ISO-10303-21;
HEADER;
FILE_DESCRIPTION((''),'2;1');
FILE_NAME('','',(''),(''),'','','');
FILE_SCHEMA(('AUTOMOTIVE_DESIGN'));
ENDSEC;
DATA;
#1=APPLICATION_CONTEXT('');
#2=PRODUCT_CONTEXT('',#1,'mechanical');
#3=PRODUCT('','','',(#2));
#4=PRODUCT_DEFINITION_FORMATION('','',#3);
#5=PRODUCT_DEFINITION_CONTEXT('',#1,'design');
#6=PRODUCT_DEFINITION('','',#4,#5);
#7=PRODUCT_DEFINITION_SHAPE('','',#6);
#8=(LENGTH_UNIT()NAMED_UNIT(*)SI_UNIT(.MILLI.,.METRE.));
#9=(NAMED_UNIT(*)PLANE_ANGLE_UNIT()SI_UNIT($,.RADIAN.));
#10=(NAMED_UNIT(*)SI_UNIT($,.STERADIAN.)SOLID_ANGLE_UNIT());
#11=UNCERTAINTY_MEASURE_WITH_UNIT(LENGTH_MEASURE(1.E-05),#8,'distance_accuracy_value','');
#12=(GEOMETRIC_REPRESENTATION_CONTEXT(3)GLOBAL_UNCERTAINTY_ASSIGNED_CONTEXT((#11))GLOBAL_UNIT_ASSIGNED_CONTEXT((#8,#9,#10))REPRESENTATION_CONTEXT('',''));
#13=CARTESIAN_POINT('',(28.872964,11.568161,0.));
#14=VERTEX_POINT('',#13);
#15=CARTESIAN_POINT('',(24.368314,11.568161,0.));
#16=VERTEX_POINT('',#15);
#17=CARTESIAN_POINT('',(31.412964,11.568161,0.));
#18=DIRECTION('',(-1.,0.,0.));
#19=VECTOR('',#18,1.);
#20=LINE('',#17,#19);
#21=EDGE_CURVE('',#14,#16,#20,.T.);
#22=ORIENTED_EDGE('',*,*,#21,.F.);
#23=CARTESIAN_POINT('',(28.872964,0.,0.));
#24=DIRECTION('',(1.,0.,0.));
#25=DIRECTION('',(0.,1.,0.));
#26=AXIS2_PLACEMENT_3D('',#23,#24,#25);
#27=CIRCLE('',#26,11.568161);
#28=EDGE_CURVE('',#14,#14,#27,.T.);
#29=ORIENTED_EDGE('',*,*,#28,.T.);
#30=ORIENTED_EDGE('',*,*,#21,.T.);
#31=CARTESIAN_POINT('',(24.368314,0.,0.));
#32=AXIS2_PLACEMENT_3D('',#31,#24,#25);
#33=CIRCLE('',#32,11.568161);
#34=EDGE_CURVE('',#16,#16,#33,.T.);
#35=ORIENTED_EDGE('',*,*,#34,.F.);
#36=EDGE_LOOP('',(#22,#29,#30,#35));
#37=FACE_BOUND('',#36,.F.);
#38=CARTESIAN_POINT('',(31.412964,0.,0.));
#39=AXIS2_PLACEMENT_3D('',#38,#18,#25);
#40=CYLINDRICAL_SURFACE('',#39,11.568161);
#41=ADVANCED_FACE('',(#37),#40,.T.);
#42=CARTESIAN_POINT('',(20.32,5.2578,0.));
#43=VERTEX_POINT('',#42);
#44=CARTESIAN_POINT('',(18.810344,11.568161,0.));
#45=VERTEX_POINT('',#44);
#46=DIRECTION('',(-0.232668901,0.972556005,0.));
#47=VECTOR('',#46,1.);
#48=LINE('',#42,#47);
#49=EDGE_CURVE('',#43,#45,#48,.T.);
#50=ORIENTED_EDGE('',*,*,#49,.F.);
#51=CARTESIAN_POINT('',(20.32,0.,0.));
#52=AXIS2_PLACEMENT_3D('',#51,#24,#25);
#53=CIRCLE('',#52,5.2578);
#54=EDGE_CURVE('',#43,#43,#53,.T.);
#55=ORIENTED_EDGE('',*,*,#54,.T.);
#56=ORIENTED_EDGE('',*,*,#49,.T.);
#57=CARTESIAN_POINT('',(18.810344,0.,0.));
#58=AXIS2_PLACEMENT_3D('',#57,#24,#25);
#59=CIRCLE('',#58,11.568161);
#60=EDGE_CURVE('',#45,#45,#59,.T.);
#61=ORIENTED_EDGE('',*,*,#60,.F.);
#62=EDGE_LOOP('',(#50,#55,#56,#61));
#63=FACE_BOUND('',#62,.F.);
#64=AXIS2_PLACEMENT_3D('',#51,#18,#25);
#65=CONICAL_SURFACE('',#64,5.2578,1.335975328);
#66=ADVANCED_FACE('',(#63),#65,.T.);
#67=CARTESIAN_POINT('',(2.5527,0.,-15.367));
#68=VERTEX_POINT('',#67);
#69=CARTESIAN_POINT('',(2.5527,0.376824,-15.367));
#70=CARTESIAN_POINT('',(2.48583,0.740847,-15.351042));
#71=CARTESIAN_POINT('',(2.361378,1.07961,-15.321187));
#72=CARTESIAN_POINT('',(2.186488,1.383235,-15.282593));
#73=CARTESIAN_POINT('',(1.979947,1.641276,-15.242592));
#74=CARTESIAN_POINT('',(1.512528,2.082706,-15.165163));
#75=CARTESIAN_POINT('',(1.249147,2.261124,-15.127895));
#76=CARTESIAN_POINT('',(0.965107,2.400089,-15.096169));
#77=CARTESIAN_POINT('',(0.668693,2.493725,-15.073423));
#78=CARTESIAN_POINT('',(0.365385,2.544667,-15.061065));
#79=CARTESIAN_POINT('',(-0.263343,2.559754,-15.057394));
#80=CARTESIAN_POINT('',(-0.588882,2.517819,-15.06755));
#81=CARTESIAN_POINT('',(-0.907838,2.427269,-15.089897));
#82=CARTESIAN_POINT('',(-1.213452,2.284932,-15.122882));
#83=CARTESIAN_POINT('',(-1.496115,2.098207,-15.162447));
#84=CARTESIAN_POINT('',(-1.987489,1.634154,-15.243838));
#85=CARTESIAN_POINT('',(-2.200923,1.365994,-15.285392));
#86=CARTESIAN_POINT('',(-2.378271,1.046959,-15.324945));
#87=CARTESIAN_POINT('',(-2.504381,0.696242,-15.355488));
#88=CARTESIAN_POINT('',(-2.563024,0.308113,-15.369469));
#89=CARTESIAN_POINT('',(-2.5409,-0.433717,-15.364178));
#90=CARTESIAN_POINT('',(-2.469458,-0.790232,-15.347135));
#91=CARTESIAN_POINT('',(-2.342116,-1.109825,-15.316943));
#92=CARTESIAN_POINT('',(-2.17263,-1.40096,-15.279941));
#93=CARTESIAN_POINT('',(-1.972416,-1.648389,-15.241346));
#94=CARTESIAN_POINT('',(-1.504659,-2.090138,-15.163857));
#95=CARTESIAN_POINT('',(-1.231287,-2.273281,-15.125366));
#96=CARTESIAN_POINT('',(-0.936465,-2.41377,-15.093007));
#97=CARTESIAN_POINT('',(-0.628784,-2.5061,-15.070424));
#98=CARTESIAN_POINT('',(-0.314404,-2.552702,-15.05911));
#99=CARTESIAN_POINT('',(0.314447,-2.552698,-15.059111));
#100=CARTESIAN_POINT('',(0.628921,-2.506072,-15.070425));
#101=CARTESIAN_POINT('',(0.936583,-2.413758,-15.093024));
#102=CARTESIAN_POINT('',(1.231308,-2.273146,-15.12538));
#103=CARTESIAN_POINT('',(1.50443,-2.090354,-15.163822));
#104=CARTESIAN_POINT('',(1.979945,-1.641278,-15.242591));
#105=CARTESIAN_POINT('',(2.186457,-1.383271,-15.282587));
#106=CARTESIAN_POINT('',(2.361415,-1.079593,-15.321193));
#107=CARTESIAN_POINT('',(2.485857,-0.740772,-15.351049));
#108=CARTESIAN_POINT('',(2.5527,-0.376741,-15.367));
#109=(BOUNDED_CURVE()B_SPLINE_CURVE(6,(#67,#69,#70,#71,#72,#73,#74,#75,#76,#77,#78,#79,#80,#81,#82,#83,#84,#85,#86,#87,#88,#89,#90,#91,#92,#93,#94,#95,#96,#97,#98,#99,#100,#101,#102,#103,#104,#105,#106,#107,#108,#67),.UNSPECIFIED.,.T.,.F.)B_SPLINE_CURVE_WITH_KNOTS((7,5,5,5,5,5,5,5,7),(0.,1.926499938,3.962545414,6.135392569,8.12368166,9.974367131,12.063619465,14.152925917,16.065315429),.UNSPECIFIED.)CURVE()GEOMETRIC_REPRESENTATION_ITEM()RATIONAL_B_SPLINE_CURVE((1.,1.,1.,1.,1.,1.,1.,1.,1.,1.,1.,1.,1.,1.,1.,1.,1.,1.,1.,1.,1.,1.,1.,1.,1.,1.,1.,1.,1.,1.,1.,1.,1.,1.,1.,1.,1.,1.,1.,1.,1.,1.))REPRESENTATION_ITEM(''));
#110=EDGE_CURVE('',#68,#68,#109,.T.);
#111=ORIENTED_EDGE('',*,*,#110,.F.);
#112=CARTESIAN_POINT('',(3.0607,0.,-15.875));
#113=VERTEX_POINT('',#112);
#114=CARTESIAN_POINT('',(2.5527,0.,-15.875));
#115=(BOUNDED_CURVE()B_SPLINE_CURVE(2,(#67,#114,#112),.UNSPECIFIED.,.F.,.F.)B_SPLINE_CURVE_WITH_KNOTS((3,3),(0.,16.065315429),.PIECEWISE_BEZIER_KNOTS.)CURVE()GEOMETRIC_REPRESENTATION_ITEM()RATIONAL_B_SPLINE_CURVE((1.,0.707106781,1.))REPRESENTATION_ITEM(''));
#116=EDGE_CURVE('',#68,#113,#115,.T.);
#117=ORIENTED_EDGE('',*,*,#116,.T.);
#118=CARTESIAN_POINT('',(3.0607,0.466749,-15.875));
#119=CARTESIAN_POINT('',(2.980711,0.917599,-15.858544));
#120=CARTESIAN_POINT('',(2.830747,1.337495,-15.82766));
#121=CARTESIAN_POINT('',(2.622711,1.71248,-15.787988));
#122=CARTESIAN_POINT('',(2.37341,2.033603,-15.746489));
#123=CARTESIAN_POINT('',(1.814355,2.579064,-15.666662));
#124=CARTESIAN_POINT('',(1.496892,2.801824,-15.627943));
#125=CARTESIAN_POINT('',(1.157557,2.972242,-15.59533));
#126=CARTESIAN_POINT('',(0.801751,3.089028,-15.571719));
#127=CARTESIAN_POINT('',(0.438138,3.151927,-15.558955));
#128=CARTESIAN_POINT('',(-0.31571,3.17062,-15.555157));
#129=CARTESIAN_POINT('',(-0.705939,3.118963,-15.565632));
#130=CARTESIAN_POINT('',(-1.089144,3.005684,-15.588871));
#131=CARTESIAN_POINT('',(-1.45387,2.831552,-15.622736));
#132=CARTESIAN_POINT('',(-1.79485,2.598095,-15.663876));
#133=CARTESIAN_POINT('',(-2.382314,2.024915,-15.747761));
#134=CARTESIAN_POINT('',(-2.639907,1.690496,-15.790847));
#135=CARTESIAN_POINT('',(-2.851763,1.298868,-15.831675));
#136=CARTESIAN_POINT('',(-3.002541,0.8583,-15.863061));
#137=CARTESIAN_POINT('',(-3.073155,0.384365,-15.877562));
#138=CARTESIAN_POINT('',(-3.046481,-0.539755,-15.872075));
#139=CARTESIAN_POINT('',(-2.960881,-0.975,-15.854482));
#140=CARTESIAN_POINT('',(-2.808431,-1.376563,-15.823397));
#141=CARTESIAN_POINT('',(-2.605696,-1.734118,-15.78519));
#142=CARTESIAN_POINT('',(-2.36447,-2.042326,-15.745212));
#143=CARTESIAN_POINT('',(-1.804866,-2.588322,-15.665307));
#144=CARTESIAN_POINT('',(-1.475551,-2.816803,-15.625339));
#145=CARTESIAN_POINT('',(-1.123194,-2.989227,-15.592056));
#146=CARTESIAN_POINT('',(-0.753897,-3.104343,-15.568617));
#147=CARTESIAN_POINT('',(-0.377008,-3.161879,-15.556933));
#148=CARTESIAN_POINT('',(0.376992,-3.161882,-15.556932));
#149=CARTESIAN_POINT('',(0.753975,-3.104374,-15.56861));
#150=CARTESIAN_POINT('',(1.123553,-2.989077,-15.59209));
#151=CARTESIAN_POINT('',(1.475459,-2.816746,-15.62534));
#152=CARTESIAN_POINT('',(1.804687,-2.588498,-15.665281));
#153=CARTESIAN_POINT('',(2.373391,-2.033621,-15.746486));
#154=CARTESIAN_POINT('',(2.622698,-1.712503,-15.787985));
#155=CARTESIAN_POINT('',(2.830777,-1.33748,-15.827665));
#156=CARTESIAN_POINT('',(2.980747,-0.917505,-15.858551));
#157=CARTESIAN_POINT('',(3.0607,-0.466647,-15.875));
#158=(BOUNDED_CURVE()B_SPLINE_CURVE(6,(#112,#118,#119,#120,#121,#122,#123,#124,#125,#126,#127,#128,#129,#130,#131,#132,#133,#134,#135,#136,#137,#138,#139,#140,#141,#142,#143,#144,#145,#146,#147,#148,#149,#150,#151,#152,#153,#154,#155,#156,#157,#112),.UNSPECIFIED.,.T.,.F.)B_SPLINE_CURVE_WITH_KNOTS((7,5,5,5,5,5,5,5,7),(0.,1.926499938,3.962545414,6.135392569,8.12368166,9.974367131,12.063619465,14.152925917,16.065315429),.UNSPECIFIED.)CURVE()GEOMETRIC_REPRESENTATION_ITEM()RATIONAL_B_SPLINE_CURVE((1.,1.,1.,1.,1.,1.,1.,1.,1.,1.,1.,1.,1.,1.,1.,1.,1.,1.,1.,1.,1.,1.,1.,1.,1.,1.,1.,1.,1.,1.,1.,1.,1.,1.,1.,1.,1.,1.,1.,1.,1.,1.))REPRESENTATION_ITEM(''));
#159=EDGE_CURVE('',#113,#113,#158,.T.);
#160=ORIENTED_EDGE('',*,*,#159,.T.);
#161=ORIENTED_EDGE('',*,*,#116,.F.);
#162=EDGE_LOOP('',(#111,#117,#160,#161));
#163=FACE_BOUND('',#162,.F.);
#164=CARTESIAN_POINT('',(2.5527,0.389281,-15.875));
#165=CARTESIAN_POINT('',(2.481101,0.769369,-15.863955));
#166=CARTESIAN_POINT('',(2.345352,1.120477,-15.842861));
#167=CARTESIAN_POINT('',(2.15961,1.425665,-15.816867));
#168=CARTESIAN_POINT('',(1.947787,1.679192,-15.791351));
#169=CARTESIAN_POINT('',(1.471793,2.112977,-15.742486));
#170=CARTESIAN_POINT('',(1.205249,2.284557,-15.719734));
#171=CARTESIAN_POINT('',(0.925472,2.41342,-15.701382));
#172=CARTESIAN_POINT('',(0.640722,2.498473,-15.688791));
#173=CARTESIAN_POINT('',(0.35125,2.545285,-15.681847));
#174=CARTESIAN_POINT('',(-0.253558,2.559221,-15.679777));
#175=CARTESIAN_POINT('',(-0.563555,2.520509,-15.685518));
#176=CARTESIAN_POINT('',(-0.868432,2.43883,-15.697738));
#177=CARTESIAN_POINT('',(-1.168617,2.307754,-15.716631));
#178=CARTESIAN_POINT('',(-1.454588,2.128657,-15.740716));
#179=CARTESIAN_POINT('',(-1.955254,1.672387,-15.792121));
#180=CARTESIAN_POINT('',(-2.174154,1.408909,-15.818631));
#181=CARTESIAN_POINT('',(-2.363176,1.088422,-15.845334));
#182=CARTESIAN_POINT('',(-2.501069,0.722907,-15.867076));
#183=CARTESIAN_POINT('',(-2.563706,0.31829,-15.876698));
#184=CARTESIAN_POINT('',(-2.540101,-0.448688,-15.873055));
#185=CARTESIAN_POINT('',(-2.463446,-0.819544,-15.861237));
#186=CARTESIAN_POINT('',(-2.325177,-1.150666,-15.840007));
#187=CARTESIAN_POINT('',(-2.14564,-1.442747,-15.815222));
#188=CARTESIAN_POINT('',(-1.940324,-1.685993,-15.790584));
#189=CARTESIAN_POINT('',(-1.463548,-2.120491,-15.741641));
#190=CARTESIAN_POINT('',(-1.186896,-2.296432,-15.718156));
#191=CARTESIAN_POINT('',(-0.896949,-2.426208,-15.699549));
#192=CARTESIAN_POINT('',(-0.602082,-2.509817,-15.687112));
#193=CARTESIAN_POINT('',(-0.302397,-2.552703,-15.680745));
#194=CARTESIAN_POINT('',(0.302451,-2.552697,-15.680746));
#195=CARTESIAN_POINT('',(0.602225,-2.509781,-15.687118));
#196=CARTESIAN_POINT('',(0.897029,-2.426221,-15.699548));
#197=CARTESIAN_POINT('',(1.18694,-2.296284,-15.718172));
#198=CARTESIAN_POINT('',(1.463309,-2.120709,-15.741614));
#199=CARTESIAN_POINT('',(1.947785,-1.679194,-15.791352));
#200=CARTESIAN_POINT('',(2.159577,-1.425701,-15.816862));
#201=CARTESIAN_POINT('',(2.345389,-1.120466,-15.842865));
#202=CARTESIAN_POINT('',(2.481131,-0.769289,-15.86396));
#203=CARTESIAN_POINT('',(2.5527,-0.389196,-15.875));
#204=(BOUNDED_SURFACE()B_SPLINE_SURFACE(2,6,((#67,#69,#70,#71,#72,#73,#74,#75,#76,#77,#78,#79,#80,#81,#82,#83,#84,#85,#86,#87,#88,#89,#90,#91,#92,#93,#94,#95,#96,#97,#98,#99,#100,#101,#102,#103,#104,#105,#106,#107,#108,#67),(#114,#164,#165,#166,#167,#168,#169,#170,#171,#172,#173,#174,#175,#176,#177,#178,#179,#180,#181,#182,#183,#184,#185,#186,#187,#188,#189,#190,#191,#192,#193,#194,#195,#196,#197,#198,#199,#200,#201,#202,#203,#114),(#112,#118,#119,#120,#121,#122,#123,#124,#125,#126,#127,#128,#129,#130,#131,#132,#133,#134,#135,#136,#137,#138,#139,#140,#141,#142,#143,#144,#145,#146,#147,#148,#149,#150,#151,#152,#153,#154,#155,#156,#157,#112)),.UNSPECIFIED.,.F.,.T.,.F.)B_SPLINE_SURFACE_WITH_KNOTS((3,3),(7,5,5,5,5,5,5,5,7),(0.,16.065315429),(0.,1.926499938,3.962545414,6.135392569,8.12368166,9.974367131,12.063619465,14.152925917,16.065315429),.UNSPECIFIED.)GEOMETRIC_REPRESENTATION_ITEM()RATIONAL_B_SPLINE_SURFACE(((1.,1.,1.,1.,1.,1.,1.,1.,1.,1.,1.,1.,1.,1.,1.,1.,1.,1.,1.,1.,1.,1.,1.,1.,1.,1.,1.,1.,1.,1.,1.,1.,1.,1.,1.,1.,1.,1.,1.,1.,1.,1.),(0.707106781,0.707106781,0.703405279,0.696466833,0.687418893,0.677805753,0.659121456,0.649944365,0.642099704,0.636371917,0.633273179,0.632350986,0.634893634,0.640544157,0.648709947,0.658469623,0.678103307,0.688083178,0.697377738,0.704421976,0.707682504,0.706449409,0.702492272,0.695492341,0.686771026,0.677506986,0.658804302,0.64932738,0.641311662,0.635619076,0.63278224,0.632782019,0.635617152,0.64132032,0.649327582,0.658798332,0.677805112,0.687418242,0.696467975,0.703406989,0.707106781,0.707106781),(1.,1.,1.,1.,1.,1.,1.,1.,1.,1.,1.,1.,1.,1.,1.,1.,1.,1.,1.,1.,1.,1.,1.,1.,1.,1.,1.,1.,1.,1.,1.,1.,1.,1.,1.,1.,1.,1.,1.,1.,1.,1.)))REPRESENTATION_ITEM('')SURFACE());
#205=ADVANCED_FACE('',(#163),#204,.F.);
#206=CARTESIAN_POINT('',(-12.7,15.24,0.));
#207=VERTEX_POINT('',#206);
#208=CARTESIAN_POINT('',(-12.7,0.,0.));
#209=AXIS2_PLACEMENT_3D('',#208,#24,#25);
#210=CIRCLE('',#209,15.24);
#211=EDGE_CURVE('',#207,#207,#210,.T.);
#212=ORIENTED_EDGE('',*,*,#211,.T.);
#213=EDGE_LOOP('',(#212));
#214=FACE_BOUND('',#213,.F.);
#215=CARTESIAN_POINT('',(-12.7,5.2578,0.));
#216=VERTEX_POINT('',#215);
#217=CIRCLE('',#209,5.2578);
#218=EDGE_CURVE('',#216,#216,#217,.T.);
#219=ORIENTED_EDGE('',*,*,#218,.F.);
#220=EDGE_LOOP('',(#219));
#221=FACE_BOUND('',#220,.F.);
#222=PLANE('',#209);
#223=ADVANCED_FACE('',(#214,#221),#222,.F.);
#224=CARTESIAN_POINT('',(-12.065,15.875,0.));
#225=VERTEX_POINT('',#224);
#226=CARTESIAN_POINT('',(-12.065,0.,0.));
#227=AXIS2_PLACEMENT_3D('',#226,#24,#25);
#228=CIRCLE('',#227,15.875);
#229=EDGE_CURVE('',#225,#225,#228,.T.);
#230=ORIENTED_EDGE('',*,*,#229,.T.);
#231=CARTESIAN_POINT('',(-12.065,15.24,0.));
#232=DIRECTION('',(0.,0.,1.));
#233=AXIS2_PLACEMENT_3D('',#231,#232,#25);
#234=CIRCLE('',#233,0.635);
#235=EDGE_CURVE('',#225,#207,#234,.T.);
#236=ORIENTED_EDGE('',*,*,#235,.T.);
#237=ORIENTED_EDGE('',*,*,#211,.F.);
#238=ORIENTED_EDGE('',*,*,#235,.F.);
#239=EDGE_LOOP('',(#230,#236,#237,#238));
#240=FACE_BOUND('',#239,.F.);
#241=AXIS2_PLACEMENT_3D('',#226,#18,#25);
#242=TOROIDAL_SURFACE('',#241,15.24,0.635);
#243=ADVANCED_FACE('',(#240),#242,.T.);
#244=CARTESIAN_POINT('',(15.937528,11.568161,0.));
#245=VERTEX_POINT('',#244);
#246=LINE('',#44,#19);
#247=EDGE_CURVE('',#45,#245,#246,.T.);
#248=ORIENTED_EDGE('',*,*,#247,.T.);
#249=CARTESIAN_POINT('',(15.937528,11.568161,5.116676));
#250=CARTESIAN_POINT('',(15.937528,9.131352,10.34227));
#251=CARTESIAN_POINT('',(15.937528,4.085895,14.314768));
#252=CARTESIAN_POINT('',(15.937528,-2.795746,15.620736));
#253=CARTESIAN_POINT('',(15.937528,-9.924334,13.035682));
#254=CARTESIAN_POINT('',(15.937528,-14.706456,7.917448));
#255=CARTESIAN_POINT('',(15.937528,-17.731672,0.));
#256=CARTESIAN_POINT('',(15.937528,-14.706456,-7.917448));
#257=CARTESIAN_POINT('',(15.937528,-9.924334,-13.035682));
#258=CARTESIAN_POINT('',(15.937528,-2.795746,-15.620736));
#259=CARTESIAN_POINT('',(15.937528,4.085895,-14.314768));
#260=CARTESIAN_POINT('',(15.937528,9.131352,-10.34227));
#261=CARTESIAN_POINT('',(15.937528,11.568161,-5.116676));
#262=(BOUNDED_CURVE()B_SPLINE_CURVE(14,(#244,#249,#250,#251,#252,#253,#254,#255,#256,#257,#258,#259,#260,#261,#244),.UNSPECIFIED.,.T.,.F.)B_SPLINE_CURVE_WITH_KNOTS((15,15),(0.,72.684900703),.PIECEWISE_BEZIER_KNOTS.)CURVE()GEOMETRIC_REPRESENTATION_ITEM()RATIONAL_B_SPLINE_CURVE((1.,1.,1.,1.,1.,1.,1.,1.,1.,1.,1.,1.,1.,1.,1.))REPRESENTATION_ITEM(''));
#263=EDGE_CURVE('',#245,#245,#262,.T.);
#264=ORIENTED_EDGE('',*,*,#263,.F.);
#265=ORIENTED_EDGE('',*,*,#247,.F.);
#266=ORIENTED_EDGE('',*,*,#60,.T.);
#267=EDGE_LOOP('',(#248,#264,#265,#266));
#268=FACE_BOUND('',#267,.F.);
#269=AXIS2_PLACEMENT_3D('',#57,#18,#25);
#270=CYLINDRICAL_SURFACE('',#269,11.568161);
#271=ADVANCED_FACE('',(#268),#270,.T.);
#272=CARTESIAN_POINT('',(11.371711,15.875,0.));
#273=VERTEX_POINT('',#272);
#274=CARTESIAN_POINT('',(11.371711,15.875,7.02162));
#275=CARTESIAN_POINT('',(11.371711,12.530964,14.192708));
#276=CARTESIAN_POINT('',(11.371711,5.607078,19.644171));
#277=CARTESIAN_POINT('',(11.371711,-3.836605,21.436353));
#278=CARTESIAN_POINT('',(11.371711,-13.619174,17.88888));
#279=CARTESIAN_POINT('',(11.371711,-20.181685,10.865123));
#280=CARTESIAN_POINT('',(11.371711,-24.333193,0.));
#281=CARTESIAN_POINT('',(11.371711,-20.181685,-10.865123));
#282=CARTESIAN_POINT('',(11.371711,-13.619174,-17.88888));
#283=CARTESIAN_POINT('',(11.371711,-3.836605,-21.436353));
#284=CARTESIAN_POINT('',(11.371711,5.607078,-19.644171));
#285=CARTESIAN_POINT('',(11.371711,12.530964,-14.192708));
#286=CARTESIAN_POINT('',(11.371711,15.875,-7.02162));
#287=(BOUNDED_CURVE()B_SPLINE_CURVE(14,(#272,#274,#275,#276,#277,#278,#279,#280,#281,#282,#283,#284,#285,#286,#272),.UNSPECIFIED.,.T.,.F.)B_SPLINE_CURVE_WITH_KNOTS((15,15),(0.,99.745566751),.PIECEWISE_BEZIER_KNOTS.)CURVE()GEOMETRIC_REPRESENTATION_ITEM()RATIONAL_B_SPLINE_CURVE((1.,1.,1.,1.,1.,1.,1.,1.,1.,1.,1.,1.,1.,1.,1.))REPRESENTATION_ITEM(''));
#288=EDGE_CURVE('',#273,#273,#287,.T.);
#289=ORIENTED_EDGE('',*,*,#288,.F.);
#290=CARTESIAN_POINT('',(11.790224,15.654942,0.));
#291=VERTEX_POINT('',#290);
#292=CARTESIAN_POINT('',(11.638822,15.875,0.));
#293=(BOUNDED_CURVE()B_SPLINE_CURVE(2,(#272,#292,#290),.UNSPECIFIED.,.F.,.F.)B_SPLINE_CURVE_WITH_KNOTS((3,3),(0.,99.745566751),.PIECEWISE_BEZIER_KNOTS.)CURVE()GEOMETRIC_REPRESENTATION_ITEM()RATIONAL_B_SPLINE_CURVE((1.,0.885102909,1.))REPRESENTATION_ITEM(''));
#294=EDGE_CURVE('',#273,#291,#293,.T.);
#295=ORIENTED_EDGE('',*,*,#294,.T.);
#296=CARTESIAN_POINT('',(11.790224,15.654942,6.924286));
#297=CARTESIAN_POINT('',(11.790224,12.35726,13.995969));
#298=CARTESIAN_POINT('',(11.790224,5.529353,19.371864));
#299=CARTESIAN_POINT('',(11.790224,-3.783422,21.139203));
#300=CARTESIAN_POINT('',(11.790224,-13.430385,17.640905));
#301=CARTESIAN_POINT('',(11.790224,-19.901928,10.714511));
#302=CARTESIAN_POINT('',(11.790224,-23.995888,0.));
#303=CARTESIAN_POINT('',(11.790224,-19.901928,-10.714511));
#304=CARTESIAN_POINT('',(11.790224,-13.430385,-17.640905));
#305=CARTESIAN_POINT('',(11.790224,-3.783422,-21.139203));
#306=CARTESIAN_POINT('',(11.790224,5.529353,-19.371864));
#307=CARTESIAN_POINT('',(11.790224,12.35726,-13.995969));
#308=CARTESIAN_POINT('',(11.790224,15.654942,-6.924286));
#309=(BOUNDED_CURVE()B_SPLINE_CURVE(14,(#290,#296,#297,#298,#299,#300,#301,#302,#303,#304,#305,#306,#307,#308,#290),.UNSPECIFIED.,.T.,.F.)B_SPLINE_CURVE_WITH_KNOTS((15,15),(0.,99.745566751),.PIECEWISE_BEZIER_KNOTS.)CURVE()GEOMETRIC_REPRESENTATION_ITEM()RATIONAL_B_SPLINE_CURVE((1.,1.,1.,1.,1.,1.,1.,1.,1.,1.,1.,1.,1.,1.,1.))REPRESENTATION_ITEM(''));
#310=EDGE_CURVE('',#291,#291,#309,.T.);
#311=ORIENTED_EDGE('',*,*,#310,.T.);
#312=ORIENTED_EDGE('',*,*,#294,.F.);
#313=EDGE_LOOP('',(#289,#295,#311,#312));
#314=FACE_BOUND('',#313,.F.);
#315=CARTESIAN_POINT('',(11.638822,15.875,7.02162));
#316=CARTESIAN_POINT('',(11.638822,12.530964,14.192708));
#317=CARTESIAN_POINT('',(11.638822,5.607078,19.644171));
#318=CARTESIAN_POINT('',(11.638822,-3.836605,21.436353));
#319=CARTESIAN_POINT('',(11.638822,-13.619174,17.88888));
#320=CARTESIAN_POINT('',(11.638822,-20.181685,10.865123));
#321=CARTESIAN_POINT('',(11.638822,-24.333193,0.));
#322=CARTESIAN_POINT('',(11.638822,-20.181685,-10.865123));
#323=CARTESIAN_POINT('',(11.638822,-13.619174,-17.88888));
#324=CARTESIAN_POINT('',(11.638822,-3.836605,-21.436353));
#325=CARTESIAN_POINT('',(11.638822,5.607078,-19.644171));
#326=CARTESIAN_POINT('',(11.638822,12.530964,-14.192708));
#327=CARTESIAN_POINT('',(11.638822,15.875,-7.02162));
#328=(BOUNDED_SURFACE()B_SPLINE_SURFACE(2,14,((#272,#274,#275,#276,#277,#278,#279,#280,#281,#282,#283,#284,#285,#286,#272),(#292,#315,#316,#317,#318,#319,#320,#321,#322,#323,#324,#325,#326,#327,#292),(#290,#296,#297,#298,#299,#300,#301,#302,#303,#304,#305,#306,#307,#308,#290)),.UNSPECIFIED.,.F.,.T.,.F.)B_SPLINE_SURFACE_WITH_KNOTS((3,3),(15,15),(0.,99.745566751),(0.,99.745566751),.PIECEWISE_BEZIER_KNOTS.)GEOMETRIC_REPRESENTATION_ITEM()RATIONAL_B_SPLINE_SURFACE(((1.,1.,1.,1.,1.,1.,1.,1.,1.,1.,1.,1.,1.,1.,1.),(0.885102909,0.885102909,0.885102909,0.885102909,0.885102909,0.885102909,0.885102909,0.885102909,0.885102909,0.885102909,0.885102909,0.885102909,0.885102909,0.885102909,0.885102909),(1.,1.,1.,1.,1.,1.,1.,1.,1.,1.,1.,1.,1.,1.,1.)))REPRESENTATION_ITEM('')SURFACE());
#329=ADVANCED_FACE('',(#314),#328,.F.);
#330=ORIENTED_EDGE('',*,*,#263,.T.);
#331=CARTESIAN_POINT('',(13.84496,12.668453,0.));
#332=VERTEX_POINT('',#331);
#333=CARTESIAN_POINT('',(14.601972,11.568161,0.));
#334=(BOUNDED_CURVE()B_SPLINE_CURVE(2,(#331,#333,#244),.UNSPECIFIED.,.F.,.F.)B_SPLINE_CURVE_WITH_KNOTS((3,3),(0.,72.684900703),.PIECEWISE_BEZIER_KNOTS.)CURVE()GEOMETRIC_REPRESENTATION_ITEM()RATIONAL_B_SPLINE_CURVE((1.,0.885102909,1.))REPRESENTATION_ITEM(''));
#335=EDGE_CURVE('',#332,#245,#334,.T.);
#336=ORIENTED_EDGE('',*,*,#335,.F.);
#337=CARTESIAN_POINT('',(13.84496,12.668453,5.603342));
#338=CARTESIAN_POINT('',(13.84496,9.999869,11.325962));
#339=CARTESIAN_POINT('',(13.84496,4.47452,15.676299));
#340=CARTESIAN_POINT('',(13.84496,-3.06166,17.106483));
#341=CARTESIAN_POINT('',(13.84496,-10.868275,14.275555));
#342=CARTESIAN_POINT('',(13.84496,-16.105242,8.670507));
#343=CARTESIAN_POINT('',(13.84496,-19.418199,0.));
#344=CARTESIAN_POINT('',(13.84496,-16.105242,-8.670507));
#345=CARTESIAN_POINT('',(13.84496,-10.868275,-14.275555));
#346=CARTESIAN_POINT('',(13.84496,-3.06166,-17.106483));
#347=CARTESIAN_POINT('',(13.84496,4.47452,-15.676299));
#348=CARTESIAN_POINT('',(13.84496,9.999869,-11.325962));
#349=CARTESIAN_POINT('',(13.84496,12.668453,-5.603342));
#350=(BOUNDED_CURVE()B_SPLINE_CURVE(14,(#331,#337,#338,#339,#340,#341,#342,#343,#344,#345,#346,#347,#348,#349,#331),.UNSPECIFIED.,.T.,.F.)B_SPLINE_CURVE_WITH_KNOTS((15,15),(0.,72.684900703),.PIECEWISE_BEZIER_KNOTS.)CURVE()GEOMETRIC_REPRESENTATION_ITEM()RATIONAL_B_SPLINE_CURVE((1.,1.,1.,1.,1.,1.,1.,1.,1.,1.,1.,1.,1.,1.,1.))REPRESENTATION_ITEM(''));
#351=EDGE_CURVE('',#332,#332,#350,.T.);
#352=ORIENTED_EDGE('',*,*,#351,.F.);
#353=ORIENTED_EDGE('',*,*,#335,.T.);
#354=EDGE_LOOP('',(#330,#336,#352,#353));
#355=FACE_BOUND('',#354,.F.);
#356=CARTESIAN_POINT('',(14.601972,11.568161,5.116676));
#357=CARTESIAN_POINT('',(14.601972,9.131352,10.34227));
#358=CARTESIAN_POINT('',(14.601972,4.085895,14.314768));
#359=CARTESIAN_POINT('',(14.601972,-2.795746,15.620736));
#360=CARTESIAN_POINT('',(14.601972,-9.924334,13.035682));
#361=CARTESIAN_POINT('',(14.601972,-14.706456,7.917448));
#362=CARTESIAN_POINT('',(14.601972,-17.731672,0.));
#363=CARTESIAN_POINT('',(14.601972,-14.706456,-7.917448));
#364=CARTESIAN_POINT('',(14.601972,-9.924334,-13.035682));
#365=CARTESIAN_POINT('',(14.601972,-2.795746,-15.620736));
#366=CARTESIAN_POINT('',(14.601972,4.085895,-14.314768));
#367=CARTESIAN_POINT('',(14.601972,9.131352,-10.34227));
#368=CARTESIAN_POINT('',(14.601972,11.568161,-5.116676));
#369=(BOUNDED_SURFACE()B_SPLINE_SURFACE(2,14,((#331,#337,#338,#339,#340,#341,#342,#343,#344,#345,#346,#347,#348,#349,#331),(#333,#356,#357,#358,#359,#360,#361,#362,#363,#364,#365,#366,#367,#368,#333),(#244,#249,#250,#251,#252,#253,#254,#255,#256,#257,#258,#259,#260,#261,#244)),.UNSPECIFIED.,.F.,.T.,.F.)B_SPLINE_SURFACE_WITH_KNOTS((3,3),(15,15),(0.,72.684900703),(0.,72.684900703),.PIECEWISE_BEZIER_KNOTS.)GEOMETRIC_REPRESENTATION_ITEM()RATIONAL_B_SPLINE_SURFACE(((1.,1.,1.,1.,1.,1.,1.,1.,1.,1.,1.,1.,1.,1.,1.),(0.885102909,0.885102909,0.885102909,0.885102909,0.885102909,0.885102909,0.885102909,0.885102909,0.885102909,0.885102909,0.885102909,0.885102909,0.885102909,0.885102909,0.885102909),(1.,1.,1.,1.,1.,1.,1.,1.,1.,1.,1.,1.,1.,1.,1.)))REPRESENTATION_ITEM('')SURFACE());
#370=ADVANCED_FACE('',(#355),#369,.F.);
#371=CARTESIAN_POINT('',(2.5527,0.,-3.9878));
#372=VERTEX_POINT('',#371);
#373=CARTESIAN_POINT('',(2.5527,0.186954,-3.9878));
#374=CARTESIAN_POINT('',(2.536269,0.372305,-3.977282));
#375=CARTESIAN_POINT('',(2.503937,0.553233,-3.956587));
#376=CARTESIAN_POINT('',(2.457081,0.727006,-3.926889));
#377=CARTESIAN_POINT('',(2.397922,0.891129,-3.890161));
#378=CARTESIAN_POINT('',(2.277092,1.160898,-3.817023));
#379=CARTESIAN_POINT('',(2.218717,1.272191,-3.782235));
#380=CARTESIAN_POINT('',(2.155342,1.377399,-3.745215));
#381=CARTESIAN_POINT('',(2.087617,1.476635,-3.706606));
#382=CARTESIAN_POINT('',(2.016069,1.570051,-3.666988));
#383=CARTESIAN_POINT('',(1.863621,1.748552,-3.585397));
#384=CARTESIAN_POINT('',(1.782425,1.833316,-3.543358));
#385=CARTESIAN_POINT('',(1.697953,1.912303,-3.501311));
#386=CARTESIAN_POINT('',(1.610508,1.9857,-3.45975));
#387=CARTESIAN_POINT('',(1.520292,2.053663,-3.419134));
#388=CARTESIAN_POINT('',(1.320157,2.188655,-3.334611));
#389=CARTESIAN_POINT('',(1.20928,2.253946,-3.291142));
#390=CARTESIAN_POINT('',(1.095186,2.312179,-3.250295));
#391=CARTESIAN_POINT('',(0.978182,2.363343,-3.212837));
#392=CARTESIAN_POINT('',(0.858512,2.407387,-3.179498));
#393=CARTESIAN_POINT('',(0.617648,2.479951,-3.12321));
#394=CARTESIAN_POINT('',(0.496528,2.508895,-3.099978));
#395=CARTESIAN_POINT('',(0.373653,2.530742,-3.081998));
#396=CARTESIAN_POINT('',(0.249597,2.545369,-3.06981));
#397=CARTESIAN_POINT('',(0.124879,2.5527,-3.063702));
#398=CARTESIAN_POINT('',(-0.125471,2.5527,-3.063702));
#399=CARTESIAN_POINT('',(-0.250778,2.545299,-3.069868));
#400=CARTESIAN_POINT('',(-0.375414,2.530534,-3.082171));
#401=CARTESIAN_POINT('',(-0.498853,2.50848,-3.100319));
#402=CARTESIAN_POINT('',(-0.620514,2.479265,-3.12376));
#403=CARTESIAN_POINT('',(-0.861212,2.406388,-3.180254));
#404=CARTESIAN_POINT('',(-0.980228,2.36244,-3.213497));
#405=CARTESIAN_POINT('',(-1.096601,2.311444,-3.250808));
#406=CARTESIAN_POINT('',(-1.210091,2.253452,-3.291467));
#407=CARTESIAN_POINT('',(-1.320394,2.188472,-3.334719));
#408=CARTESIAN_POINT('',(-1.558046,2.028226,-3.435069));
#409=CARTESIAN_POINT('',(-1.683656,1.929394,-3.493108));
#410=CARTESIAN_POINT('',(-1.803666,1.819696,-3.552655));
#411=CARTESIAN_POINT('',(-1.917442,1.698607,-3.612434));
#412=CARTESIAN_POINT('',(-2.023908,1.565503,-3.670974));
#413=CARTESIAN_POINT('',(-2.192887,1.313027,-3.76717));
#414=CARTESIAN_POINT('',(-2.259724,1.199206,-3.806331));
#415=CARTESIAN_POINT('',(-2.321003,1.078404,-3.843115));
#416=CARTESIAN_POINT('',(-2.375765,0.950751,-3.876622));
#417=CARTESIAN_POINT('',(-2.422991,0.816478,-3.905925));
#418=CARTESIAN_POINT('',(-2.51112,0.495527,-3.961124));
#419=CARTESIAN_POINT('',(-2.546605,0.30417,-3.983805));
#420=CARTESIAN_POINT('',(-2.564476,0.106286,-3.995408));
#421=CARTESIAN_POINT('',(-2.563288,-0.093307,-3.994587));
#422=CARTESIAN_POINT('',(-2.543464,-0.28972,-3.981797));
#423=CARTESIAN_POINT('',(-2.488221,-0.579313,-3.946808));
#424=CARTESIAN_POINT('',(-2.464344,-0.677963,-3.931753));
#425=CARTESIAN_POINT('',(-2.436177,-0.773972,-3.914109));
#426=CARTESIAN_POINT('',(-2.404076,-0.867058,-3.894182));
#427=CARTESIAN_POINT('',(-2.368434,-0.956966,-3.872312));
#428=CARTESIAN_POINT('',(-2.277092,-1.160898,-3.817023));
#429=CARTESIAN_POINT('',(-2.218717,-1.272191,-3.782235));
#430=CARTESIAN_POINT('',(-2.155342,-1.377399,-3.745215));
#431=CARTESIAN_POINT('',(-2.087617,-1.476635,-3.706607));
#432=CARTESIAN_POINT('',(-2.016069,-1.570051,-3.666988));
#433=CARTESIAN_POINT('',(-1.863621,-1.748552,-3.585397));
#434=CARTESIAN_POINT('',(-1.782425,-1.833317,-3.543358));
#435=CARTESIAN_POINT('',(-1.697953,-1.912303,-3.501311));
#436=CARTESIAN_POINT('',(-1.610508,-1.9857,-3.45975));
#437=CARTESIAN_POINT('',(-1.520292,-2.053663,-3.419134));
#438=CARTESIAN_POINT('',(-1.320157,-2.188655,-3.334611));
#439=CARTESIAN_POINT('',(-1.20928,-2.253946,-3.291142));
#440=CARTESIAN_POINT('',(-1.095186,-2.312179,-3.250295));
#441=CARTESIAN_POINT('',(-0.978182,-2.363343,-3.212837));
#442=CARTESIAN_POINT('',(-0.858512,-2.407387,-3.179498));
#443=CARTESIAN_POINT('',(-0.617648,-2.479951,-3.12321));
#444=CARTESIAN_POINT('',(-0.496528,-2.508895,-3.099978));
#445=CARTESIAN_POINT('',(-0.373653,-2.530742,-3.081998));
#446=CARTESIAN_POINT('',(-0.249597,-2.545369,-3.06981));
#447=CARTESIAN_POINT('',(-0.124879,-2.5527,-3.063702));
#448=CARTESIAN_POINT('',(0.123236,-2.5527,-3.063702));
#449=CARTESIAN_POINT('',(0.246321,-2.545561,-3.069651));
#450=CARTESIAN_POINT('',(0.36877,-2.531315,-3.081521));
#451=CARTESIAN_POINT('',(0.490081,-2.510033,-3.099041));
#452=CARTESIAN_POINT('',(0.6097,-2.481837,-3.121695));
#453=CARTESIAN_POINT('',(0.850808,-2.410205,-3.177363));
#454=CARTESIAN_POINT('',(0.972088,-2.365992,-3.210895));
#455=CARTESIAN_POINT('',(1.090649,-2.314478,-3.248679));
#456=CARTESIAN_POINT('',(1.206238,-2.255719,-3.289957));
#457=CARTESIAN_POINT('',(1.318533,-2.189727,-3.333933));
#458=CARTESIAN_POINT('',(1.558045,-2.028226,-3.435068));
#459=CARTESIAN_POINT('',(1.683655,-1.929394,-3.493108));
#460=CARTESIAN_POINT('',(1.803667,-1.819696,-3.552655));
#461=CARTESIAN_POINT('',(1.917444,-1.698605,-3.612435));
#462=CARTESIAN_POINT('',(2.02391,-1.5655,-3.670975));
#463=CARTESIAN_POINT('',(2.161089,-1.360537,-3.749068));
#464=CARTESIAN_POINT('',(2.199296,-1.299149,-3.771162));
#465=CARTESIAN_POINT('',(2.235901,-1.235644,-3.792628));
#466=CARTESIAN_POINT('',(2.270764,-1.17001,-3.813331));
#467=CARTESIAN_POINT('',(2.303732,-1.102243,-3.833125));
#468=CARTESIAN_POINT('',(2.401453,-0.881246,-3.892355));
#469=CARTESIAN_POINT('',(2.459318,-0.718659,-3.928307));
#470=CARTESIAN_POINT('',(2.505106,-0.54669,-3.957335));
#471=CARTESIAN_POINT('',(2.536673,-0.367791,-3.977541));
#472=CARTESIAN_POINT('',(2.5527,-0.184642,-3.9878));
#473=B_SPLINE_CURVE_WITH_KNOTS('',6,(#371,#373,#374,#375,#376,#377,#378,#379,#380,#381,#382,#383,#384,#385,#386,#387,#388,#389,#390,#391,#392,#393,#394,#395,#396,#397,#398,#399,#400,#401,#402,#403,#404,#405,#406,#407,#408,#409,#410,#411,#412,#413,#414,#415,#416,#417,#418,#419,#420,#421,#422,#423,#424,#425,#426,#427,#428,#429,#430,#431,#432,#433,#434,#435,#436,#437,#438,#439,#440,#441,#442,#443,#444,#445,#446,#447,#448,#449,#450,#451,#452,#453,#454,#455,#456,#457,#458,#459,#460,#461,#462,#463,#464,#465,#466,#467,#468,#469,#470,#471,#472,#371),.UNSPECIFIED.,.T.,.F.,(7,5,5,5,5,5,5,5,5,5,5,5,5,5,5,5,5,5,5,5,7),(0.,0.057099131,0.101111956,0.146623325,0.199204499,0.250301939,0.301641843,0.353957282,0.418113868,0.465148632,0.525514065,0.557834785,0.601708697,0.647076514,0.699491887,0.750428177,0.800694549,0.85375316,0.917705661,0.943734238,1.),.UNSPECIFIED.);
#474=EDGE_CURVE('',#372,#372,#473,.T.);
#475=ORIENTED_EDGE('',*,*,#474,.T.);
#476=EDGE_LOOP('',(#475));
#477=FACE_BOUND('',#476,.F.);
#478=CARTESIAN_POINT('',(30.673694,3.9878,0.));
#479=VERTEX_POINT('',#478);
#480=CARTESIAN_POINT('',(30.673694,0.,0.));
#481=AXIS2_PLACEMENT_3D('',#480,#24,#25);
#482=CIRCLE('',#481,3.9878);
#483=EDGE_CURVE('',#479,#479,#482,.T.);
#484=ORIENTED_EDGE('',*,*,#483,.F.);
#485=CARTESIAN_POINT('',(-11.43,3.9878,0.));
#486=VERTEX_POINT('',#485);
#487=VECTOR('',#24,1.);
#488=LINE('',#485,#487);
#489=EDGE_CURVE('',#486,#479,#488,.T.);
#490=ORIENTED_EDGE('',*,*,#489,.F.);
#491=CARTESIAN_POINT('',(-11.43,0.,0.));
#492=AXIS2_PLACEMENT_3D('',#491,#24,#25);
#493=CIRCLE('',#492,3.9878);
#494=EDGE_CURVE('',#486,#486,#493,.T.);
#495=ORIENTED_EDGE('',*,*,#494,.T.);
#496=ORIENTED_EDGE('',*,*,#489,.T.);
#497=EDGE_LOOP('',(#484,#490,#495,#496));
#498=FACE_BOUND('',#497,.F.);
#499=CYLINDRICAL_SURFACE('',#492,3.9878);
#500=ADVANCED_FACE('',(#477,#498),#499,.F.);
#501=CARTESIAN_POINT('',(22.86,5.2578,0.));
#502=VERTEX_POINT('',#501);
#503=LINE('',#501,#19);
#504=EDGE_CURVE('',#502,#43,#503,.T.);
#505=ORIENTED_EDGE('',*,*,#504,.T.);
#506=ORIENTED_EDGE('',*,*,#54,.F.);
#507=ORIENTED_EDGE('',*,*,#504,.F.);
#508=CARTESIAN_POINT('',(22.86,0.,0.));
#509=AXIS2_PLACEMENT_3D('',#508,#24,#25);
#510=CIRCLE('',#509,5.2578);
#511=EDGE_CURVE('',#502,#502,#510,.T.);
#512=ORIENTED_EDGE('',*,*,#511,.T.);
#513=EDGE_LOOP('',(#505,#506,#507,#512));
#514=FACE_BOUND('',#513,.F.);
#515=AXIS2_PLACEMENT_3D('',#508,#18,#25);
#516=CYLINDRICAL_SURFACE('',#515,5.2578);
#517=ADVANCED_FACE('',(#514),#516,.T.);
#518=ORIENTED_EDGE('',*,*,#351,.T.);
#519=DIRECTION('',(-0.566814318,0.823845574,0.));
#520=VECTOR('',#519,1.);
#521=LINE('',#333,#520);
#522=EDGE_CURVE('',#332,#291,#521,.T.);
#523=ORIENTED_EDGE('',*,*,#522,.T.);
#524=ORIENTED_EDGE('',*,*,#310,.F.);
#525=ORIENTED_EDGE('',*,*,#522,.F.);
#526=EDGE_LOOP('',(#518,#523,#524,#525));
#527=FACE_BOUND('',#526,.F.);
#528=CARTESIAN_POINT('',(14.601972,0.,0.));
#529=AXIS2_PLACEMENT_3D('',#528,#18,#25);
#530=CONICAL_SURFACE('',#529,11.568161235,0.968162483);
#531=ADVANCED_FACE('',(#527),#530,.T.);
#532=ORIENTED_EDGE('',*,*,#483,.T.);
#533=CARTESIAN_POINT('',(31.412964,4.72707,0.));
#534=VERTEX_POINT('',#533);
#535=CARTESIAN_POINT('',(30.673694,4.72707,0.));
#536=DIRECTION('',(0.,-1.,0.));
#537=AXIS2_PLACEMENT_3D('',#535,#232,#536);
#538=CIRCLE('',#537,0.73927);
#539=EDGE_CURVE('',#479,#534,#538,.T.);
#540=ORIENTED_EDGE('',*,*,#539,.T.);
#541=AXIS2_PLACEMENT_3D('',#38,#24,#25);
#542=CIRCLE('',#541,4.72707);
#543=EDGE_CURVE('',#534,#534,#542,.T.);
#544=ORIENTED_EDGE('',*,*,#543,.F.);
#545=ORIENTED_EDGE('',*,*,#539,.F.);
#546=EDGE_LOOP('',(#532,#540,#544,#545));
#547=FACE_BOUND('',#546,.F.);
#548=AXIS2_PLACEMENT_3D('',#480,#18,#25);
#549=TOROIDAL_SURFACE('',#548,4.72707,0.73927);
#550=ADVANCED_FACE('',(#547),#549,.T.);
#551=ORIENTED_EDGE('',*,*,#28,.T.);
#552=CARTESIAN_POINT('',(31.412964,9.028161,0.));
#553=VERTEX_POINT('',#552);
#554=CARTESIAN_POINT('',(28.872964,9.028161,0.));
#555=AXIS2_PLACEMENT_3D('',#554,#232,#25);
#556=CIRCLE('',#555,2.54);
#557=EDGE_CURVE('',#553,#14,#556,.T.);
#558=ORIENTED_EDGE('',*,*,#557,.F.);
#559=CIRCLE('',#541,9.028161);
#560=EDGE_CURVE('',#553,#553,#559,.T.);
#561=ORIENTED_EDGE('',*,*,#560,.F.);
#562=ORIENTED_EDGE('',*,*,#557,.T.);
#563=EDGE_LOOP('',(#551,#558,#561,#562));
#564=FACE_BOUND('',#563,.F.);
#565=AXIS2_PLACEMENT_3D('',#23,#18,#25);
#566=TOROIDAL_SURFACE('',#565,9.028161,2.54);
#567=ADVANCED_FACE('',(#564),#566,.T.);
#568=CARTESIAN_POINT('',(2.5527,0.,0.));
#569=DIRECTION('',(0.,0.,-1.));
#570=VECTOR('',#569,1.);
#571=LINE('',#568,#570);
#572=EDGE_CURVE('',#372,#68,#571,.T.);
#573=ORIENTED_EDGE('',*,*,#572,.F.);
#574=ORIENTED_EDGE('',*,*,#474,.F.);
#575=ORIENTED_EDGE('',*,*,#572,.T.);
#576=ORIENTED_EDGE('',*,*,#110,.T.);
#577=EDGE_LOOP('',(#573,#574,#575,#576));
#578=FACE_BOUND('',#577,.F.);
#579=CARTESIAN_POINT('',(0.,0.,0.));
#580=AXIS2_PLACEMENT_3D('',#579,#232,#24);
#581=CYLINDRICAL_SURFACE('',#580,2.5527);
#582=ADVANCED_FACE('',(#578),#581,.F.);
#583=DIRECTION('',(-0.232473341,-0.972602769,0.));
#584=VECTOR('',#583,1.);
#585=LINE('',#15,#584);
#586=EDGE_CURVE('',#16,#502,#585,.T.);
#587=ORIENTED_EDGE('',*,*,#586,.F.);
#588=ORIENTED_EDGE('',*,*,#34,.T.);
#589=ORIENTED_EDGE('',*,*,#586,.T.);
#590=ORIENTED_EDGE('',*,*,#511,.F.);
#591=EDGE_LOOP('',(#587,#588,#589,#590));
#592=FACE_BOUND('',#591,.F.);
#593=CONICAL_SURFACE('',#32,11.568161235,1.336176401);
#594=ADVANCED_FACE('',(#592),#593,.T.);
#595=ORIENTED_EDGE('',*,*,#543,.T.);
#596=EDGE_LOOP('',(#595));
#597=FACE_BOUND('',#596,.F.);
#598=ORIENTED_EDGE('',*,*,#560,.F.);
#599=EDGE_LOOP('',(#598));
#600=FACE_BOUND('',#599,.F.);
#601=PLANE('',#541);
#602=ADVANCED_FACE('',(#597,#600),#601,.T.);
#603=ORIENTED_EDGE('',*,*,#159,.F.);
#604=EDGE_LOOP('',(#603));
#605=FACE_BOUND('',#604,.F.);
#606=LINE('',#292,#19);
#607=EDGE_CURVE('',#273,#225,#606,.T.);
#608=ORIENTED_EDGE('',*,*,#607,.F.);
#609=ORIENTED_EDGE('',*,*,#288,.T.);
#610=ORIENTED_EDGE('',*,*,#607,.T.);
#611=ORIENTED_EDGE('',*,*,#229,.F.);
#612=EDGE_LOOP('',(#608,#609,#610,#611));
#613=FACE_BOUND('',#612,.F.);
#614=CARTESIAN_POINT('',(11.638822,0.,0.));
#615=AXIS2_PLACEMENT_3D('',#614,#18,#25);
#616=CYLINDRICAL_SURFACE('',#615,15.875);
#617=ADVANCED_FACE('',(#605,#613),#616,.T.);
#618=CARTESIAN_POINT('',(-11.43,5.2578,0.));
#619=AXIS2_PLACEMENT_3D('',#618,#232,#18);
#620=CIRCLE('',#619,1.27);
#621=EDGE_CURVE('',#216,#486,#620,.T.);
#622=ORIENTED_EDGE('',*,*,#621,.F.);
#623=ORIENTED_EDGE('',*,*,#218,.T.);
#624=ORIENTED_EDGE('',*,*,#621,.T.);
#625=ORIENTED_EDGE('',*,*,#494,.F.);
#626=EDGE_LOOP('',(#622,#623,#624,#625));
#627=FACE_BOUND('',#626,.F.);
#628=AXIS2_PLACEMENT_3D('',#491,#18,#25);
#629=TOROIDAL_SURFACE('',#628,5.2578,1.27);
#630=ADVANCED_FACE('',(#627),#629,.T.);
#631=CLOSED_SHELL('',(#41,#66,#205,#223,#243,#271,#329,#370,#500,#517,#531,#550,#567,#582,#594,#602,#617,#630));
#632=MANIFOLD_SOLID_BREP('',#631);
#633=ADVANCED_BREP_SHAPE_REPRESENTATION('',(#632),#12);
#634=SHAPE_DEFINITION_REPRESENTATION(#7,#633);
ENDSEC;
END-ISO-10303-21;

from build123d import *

# Parameters (mm, degrees)
F2_R     = 2.5527
F3_DEPTH = 25.4
F4_R     = 0.508
F5_R     = 2.54


# Not quite as in the source:
# - a feature names something its author has since deleted; it is built from what else it names


with BuildPart() as f1:
    # F0 (on Top) → F1 (revolve)
    with BuildSketch(Plane.XY):
        with BuildLine():
            ThreePointArc((-12.7, 5.2578), (-12.3280256121, 4.3597743879), (-11.43, 3.9878))
            Line((-11.43, 3.9878), (21.59, 3.9878))
            Line((21.59, 3.9878), (30.6736943138, 3.9878))
            ThreePointArc((30.6736943138, 3.9878), (31.1964370123, 4.2043271153), (31.4129641276, 4.7270698138))
            Line((31.4129641276, 4.7270698138), (31.4129641276, 11.2707641276))
            Line((31.4129641276, 11.2707641276), (31.4129641276, 11.5681612351))
            Line((31.4129641276, 11.5681612351), (24.3683144, 11.5681612351))
            Line((24.3683144, 11.5681612351), (22.86, 5.2578))
            Line((22.86, 5.2578), (21.59, 5.2578))
            Line((21.59, 5.2578), (20.32, 5.2578))
            Line((20.32, 5.2578), (18.8103442021, 11.5681612351))
            Line((18.8103442021, 11.5681612351), (14.6019718679, 11.5681612351))
            Line((14.6019718679, 11.5681612351), (11.638822034, 15.875))
            Line((11.638822034, 15.875), (-12.065, 15.875))
            ThreePointArc((-12.065, 15.875), (-12.5140128061, 15.6890128061), (-12.7, 15.24))
            Line((-12.7, 15.24), (-12.7, 5.2578))
        make_face()
    revolve(axis=Axis((0.6358246983, 0, 0), (1, 0, 0)))

    # F2 (on Top) → F3 (cut)
    with BuildSketch(Plane.XY):
        Circle(F2_R)
    extrude(amount=-F3_DEPTH, mode=Mode.SUBTRACT)

    # F4
    f4_edges = [f1.edges().sort_by_distance(p)[0] for p in [
        (-0.213089, 15.875, 0),
        (-12.065, -15.875, 0),
        (11.638822, -15.875, 0),
        (-2.5527, 0, -15.875),
    ]]
    fillet(f4_edges, radius=F4_R)

    # F5
    f5_edges = [f1.edges().sort_by_distance(p)[0] for p in [
        (31.412964, -11.568161, 0),
        (14.601972, -11.568161, 0),
    ]]
    fillet(f5_edges, radius=F5_R)


solid = f1.part
